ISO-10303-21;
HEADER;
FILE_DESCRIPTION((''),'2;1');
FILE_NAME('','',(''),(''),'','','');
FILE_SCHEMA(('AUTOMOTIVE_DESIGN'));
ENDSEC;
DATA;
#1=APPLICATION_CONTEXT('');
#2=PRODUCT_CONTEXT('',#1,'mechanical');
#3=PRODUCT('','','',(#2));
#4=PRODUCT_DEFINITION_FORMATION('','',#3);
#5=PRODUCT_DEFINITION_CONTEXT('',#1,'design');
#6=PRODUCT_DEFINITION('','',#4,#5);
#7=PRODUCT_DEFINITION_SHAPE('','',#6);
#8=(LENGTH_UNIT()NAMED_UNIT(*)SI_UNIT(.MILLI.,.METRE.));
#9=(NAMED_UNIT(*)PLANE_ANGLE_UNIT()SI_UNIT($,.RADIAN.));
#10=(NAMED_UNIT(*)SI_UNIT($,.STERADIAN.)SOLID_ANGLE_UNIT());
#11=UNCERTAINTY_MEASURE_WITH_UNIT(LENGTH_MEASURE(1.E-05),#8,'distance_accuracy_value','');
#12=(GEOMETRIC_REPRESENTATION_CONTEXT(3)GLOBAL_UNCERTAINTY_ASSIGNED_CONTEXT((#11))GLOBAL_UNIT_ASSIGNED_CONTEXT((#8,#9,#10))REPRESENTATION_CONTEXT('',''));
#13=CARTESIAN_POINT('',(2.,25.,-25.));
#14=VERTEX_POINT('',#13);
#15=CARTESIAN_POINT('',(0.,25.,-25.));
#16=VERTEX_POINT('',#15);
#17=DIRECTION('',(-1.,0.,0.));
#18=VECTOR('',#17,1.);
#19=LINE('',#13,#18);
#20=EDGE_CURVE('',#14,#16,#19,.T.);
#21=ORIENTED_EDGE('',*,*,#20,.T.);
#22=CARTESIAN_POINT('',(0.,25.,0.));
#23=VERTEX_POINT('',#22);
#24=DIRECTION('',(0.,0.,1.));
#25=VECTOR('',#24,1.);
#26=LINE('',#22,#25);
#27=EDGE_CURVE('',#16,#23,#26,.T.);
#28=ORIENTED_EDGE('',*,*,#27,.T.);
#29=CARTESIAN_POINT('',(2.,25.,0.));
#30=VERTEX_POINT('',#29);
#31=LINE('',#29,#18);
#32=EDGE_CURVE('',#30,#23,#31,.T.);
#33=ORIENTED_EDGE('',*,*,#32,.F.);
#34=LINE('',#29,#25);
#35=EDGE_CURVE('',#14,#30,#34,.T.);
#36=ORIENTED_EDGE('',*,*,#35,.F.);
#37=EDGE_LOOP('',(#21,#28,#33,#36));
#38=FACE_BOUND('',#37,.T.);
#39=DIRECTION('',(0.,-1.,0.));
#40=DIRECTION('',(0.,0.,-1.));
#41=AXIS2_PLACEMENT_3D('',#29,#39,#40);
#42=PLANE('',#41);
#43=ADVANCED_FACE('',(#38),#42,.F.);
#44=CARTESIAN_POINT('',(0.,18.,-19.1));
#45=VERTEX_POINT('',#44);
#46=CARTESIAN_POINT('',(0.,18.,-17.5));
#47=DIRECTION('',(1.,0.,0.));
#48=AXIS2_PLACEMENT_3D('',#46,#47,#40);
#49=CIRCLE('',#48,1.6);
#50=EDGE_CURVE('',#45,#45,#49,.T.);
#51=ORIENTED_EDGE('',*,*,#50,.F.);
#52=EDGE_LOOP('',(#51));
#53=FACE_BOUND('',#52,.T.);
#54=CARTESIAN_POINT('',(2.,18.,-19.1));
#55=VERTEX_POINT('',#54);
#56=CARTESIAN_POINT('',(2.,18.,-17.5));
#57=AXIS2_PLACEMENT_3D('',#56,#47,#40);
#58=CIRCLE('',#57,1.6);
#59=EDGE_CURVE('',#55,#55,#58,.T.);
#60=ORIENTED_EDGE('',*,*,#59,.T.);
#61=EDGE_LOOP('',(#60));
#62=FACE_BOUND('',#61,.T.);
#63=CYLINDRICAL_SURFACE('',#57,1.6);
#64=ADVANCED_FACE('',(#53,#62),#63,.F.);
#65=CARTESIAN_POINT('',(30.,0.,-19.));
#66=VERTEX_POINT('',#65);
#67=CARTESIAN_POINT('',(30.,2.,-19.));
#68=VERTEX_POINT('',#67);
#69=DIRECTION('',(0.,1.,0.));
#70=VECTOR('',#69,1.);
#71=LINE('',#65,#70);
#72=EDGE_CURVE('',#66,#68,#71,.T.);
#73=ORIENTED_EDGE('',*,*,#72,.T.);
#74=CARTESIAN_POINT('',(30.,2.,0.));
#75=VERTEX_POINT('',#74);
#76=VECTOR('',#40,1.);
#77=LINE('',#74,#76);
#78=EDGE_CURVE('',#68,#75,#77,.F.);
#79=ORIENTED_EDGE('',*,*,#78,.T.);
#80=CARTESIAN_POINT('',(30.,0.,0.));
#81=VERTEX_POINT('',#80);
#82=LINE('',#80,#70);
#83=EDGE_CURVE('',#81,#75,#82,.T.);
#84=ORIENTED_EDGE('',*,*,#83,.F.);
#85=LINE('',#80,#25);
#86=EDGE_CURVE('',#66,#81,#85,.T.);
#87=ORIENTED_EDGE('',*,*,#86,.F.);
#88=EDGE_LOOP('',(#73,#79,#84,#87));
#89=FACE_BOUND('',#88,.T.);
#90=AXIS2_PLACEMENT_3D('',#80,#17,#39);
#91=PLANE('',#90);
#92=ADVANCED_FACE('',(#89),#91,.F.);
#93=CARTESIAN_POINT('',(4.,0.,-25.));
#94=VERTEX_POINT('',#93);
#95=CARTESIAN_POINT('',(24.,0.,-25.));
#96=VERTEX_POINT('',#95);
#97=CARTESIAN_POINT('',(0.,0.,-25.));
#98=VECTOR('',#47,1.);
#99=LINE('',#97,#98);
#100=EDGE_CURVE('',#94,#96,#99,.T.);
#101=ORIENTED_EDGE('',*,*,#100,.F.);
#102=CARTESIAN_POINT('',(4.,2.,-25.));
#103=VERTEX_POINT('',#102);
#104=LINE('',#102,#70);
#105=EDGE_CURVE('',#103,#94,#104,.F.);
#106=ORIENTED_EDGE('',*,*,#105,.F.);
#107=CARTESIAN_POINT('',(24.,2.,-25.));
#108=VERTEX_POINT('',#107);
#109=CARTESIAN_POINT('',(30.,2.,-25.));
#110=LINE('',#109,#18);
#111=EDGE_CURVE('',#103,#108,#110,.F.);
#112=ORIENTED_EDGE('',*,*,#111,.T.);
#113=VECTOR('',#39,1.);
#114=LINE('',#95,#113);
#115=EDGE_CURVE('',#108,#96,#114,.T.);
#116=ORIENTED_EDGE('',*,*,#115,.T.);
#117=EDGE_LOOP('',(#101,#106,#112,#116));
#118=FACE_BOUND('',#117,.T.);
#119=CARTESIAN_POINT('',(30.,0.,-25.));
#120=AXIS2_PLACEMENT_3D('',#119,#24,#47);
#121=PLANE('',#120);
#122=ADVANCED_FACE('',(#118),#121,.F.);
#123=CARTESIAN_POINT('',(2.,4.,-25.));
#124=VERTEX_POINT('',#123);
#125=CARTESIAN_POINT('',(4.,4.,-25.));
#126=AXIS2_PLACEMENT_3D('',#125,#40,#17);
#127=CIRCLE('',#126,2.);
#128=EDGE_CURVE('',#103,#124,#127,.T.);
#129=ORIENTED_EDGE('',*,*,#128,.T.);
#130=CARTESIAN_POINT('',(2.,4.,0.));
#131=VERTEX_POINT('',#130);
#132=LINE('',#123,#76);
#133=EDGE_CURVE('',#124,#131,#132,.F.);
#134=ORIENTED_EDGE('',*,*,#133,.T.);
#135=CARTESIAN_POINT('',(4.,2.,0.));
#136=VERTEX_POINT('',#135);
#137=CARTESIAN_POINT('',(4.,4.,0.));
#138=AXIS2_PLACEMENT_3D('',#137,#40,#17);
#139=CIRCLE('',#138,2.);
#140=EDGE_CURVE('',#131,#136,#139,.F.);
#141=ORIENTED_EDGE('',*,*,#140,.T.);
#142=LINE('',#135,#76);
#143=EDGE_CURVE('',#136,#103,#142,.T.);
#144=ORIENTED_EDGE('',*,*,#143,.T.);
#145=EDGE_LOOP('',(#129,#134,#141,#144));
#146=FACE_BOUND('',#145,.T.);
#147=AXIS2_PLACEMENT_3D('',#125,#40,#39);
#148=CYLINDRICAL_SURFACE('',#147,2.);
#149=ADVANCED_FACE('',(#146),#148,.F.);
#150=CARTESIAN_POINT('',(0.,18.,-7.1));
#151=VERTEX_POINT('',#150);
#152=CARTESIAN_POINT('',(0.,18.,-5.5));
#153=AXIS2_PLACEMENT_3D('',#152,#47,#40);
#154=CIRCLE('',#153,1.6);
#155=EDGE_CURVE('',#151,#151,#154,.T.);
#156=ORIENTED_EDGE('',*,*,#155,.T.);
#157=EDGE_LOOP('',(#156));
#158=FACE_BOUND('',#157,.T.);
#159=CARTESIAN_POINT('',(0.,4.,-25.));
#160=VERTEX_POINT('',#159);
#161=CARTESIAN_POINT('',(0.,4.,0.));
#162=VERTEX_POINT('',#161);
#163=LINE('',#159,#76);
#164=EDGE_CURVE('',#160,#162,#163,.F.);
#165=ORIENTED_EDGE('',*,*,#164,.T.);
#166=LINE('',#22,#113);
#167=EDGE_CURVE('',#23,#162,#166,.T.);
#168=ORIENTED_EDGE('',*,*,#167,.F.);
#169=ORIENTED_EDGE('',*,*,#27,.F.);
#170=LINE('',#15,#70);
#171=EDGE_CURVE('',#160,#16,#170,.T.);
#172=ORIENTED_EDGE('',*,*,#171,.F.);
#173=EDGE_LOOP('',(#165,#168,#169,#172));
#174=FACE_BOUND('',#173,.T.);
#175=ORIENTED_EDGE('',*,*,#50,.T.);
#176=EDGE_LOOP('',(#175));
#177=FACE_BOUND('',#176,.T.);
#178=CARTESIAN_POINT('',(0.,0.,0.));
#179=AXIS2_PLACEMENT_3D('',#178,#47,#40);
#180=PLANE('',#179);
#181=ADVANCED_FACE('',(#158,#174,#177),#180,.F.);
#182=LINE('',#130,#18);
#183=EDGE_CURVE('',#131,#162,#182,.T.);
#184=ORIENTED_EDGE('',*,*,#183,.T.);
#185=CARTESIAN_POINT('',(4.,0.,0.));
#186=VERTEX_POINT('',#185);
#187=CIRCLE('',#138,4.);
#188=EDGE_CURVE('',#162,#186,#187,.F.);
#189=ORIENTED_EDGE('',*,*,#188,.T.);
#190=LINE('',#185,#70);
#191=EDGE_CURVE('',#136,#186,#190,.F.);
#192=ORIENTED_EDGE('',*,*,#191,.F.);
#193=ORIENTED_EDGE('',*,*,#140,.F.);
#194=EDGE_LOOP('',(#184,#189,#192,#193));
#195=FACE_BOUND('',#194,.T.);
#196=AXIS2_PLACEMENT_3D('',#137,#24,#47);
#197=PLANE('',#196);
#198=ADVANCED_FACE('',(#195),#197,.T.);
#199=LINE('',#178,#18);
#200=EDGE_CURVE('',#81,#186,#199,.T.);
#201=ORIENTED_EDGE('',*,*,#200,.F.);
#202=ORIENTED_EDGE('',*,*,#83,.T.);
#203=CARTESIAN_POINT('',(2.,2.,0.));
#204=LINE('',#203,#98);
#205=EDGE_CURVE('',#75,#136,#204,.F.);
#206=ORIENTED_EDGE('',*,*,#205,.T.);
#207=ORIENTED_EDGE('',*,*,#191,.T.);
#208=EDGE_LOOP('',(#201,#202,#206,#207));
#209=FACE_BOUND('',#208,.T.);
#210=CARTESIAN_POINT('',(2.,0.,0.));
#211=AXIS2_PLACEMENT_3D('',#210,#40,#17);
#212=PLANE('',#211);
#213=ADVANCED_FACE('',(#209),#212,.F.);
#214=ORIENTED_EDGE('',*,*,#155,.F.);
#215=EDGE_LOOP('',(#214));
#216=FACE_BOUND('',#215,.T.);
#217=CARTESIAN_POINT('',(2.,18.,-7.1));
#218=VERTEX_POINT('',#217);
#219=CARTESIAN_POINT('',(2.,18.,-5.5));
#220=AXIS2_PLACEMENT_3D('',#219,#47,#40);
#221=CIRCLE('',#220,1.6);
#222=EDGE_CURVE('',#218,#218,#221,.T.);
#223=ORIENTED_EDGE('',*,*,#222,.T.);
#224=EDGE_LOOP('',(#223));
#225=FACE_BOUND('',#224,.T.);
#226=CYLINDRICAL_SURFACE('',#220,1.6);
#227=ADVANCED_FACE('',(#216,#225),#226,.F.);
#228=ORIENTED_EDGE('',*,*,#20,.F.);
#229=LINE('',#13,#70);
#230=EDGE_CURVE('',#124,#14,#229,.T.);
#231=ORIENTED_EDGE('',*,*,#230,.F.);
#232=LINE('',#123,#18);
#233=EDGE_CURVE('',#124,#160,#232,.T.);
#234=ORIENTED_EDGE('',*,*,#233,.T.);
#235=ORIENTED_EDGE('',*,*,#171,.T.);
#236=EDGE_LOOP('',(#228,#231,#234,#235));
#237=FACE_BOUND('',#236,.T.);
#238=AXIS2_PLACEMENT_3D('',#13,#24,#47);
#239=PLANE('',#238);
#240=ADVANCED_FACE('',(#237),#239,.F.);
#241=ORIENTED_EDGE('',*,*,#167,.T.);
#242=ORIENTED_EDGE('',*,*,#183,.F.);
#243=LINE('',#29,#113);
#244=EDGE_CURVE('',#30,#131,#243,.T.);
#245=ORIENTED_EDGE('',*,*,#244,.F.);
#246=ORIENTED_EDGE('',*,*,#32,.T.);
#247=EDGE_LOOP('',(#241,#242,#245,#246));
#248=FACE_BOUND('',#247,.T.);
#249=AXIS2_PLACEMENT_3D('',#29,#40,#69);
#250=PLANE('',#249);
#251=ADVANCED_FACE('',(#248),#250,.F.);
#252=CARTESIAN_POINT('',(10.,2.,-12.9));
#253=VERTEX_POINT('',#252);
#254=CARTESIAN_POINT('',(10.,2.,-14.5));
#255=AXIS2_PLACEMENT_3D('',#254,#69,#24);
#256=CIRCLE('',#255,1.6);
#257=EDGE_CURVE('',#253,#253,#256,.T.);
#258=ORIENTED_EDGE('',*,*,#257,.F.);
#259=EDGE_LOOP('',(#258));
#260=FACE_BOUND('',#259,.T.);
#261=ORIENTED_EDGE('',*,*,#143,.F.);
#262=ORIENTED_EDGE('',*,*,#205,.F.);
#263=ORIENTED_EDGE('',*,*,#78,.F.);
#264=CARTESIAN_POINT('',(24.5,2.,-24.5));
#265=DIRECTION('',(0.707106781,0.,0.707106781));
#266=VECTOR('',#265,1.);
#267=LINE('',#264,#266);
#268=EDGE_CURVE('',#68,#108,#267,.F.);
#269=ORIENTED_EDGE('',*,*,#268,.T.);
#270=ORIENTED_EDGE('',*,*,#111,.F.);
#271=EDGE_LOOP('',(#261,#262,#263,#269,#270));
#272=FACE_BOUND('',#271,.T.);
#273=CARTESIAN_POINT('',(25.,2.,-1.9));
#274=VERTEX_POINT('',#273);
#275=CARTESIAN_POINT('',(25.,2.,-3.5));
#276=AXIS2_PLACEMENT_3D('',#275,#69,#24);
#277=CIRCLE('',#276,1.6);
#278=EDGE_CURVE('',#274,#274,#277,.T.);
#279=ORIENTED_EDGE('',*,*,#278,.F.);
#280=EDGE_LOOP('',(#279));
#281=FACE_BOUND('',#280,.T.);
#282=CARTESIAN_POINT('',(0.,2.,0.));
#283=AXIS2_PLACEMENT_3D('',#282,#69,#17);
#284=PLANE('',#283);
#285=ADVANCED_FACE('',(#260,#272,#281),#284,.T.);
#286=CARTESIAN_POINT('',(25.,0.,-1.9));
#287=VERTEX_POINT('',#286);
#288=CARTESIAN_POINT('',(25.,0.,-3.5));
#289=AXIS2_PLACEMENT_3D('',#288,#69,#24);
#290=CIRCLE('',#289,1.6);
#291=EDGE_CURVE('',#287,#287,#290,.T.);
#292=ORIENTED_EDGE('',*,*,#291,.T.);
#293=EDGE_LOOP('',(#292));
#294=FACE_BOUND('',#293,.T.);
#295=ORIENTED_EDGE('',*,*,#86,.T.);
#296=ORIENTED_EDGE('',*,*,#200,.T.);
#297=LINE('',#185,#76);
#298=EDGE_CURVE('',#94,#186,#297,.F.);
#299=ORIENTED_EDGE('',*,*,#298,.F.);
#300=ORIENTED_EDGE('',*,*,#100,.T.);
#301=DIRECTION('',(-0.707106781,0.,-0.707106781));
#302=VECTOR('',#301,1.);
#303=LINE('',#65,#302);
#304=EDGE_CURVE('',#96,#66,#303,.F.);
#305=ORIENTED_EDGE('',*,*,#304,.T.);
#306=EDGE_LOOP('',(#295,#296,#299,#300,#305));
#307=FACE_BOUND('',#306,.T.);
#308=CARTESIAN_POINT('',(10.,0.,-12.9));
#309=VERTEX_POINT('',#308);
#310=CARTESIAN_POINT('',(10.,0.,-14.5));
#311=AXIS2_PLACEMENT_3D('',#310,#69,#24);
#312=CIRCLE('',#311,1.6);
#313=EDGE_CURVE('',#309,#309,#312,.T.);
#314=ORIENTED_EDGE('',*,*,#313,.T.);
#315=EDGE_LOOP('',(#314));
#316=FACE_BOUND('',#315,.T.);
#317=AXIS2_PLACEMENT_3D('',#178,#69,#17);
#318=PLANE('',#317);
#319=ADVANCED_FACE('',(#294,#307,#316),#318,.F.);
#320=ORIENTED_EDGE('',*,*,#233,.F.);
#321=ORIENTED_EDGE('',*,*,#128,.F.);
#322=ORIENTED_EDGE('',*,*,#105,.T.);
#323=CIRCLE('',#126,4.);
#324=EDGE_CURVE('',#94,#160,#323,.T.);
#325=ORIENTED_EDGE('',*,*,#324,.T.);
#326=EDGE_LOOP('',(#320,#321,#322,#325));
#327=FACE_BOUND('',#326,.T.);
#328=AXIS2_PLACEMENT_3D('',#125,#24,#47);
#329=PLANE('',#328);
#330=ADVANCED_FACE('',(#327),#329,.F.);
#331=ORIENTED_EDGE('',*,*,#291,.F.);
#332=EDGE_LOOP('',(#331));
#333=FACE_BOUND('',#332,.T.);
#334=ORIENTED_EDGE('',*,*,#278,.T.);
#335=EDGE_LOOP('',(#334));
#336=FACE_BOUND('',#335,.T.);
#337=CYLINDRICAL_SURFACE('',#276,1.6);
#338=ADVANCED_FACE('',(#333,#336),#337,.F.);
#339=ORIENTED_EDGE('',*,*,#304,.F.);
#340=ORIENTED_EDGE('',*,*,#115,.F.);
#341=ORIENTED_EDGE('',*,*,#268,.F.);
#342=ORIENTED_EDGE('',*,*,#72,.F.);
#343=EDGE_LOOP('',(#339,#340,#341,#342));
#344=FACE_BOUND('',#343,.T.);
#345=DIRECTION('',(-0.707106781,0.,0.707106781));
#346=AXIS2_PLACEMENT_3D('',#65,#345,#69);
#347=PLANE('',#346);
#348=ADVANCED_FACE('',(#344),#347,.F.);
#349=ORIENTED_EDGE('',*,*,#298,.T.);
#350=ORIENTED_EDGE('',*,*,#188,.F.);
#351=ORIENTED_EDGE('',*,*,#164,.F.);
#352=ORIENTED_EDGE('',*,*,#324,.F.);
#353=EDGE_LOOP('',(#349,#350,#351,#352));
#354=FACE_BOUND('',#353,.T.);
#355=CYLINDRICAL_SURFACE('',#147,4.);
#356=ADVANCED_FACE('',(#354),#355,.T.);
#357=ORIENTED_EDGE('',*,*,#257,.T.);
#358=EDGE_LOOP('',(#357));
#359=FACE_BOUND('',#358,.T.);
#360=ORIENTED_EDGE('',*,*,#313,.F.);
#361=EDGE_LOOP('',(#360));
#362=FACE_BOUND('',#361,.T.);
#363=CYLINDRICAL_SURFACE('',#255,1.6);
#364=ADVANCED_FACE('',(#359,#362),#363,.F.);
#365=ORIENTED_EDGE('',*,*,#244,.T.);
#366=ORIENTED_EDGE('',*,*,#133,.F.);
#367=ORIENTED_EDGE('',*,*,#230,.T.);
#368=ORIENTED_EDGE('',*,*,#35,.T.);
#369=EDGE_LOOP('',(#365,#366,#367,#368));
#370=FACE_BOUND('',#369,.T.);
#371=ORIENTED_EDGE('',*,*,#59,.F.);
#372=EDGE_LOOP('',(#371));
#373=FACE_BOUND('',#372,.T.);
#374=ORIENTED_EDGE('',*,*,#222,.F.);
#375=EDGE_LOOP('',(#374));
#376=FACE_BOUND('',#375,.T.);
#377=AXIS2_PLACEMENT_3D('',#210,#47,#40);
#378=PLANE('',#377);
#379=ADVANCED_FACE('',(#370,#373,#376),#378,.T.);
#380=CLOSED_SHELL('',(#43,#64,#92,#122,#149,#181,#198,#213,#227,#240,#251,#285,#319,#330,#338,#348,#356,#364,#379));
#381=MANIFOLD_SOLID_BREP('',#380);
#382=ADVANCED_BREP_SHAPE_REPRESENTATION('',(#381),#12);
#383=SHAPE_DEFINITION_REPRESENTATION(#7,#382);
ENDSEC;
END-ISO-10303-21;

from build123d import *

# Parameters (mm, degrees)
SKETCH5_W                    = 25
SKETCH5_H                    = 25
BASE_FLANGE1_DEPTH           = 2
EDGE_FLANGE1_STRIP_W         = 12
EDGE_FLANGE1_STRIP_H         = 2
EDGE_FLANGE1_STRIP_CUT_DEPTH = 25
EDGE_FLANGE1_DEPTH           = 25
BREAK_CORNER1_START          = 34.648232278
BREAK_CORNER1_OUTLINE_W      = 11
BREAK_CORNER1_OUTLINE_H      = 2
BREAK_CORNER1_DEPTH          = 4.242640687
F_3_2_3_2_DIAMETER_HOLE1_D   = 3.2
F_3_2_3_2_DIAMETER_HOLE2_D   = 3.2


# Read off the part's stored shape, not the designer's step: Break-Corner1
# Sheet-metal steps are written as plain solids
with BuildPart() as part:
    # Sketch5 → Base-Flange1 (new body)
    with BuildSketch(Plane(origin=(0, 0, 0), x_dir=(0, 0, -1), z_dir=(1, 0, 0))):
        with Locations((12.5, 12.5)):
            Rectangle(SKETCH5_W, SKETCH5_H)
    extrude(amount=BASE_FLANGE1_DEPTH)

    # Edge-Flange1 strip (across the edge) → Edge-Flange1 strip cut (cut)
    with BuildSketch(Plane(origin=(2, 0, 0), x_dir=(0, 1, 0), z_dir=(0, 0, -1))):
        with Locations((-2, -1)):
            Rectangle(EDGE_FLANGE1_STRIP_W, EDGE_FLANGE1_STRIP_H)
    extrude(amount=EDGE_FLANGE1_STRIP_CUT_DEPTH, mode=Mode.SUBTRACT)

    # Edge-Flange1 section (across the edge) → Edge-Flange1 (add)
    with BuildSketch(Plane(origin=(2, 0, 0), x_dir=(0, 1, 0), z_dir=(0, 0, -1))):
        with BuildLine():
            Line((0, 2), (0, 28))
            Line((0, 28), (2, 28))
            Line((2, 28), (2, 2))
            ThreePointArc((2, 2), (2.585786438, 0.585786438), (4, 0))
            Line((4, 0), (4, -2))
            ThreePointArc((4, -2), (1.171572875, -0.828427125), (0, 2))
        make_face()
    extrude(amount=EDGE_FLANGE1_DEPTH)

    # Break-Corner1 outline → Break-Corner1 (cut)
    with BuildSketch(Plane(origin=(0, 0, 0), x_dir=(0.7071067811865474, 0, 0.7071067811865477), z_dir=(0.7071067811865476, 0, -0.7071067811865476)).offset(BREAK_CORNER1_START)):
        with Locations((3.5, -1)):
            Rectangle(BREAK_CORNER1_OUTLINE_W, BREAK_CORNER1_OUTLINE_H)
    extrude(amount=BREAK_CORNER1_DEPTH, mode=Mode.SUBTRACT)

    # Ø3.2 (3.2) Diameter Hole1 (through all)
    with Locations(Plane(origin=(2, 0, 0), x_dir=(0, 0, -1), z_dir=(1, 0, 0))):
        with Locations((5.5, 18), (17.5, 18)):
            Hole(F_3_2_3_2_DIAMETER_HOLE1_D / 2)

    # Ø3.2 (3.2) Diameter Hole2 (through all)
    with Locations(Plane(origin=(0, 2, 0), x_dir=(1, 0, 0), z_dir=(0, 1, 0))):
        with Locations((10, 14.5), (25, 3.5)):
            Hole(F_3_2_3_2_DIAMETER_HOLE2_D / 2)


solid = part.part
